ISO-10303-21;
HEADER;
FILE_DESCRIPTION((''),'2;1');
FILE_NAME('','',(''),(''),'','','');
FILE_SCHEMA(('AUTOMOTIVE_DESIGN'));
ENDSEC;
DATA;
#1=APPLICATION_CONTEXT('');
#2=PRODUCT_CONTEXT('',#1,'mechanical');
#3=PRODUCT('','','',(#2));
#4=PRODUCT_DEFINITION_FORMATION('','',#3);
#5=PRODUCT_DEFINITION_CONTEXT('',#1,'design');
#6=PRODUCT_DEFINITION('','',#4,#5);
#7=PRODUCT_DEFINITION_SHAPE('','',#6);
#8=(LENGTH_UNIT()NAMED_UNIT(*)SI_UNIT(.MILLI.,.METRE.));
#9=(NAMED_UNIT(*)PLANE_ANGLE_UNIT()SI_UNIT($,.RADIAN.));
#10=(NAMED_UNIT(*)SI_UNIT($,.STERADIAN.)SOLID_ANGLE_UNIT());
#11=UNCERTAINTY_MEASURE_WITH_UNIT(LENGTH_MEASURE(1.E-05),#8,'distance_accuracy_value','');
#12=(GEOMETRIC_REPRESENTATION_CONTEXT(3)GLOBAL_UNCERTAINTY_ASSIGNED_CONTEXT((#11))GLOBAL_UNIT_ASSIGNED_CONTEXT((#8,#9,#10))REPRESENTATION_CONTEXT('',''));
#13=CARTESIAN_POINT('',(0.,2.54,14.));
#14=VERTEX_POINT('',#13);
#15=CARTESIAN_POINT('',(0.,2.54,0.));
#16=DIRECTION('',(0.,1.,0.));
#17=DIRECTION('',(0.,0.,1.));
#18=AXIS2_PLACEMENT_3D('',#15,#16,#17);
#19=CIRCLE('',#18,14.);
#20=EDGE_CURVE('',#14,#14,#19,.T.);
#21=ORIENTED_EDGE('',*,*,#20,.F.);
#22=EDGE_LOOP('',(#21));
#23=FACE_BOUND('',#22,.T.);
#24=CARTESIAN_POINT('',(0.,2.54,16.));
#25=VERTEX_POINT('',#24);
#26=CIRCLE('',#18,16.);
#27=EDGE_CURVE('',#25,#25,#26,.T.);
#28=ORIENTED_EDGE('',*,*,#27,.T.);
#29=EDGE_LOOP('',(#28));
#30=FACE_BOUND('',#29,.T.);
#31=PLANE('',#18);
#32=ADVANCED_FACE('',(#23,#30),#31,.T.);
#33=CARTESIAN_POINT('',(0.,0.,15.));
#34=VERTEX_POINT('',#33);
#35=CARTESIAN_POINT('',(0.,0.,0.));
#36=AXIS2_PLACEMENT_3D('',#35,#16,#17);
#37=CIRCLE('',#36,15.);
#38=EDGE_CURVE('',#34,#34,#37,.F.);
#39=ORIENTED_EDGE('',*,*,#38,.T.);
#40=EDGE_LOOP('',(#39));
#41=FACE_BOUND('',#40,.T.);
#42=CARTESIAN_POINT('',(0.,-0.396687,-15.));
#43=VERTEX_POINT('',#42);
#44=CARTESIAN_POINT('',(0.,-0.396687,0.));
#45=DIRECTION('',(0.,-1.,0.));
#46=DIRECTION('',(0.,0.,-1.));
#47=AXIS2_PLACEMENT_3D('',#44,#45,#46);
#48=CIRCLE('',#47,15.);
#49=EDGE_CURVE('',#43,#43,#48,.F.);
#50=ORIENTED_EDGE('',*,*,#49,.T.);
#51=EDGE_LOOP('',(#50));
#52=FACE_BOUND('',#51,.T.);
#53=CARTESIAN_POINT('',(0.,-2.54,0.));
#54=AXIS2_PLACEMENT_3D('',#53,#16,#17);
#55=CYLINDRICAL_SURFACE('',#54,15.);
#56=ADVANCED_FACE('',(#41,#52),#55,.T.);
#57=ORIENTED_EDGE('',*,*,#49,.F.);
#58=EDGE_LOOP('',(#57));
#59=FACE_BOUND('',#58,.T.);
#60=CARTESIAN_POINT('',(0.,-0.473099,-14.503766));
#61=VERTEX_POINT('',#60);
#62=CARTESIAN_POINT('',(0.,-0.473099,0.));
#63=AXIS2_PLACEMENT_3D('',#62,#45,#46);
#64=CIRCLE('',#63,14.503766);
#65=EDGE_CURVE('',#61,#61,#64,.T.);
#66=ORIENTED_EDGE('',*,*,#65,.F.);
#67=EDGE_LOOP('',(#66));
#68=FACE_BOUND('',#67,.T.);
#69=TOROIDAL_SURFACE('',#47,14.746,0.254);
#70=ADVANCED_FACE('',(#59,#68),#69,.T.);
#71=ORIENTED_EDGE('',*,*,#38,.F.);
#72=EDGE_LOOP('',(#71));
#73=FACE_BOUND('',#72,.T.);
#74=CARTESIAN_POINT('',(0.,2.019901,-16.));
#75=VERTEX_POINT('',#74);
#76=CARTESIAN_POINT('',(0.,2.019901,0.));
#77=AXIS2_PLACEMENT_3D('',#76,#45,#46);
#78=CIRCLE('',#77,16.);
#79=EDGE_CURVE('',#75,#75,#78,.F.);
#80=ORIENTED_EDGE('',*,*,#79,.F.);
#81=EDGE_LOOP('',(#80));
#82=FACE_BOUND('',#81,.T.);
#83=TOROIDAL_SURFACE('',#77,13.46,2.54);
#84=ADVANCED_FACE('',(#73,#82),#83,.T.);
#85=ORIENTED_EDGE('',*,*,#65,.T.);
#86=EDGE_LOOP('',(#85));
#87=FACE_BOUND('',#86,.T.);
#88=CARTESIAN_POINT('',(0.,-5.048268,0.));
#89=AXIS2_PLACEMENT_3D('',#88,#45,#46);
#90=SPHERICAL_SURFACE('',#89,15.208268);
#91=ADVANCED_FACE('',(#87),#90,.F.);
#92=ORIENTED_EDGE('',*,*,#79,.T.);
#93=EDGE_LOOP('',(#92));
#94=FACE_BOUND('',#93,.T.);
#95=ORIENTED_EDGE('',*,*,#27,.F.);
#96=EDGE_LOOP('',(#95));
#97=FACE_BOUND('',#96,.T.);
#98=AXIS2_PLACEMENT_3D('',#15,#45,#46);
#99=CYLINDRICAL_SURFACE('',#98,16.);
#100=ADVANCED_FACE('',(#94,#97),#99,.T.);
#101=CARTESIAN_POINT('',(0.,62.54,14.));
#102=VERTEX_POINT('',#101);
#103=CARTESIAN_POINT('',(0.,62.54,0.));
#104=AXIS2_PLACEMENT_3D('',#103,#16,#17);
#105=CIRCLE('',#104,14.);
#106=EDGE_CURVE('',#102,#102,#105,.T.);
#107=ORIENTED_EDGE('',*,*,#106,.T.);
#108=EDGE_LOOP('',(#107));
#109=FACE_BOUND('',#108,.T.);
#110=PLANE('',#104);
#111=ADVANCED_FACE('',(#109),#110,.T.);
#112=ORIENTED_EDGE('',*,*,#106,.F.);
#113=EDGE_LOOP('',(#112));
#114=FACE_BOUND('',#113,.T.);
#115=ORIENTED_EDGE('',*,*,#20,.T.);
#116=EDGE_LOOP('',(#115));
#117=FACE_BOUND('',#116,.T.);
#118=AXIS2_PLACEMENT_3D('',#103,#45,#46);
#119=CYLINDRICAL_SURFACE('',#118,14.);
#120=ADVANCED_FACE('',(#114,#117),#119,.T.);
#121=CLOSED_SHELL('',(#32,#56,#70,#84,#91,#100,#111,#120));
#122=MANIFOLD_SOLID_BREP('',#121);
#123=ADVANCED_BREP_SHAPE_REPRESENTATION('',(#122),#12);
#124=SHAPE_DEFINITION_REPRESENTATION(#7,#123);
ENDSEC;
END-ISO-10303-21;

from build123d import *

# Parameters (mm, degrees)
SKETCH1_R           = 16
BOSS_EXTRUDE1_DEPTH = 2.54
SKETCH2_R           = 14
BOSS_EXTRUDE2_DEPTH = 60
SKETCH3_R           = 15
BOSS_EXTRUDE3_DEPTH = 2.54
DOME1_FACE_RADIUS   = 15
DOME1_HEIGHT        = 12.7
FILLET1_R           = 2.54
FILLET2_R           = 0.254


with BuildPart() as part:
    # Sketch1 → Boss-Extrude1 (new body)
    with BuildSketch(Plane(origin=(0, 0, 0), x_dir=(1, 0, 0), z_dir=(0, 1, 0))):
        with Locations(Location((0, 0, 0), (0, 0, 270))):
            Circle(SKETCH1_R)
    extrude(amount=BOSS_EXTRUDE1_DEPTH)

    # Sketch2 → Boss-Extrude2 (add)
    with BuildSketch(Plane(origin=(0, 2.54, 0), x_dir=(1, 0, 0), z_dir=(0, 1, 0))):
        with Locations(Location((0, 0, 0), (0, 0, 270))):
            Circle(SKETCH2_R)
    extrude(amount=BOSS_EXTRUDE2_DEPTH)

    # Sketch3 → Boss-Extrude3 (add)
    with BuildSketch(Plane.XZ):
        with Locations(Location((0, 0, 0), (0, 0, 90))):
            Circle(SKETCH3_R)
    extrude(amount=BOSS_EXTRUDE3_DEPTH)

    # Dome1: a dome of height H over a round flat face of radius A is a cap of a sphere of radius (A * A + H * H) / (2 * H)
    dome1_r = (DOME1_FACE_RADIUS * DOME1_FACE_RADIUS + DOME1_HEIGHT * DOME1_HEIGHT) / (2 * DOME1_HEIGHT)
    dome1_base = Plane((0, -2.54, 0), z_dir=(0, 1, 0))
    with Locations(dome1_base.offset(DOME1_HEIGHT - dome1_r)):
        dome1_ball = Sphere(dome1_r, mode=Mode.PRIVATE)
    add(split(dome1_ball, bisect_by=dome1_base, keep=Keep.TOP, mode=Mode.PRIVATE), mode=Mode.SUBTRACT)

    # Fillet1
    # the kernel refuses this fillet: 2.54 mm, written as the material it takes off along each edge
    with BuildSketch(Plane(origin=(0, 0, 0), x_dir=(0, 0, 1), z_dir=(-1, 0, 0))) as fillet1_piece_1:
        with BuildLine():
            CenterArc((13.46, 2.019900988), FILLET1_R, 307.322390296, 52.677609704)
            Line((15, 0), (15.0308, -0.04039802))
            ThreePointArc((15.0308, -0.04039802), (15.5, -0.0508), (16, -0.0508))
            Line((16, -0.0508), (16.0508, 0))
            Line((16.0508, 0), (16.0508, 2.019900988))
            Line((16.0508, 2.019900988), (16, 2.019900988))
        make_face()
    revolve(axis=Axis((0, 0, 0), (0, 1, 0)), mode=Mode.SUBTRACT)

    # Fillet2
    fillet2_edges = [part.edges().sort_by_distance(p)[0] for p in [
        (0, -2.54, -15),
    ]]
    fillet(fillet2_edges, radius=FILLET2_R)


solid = part.part
